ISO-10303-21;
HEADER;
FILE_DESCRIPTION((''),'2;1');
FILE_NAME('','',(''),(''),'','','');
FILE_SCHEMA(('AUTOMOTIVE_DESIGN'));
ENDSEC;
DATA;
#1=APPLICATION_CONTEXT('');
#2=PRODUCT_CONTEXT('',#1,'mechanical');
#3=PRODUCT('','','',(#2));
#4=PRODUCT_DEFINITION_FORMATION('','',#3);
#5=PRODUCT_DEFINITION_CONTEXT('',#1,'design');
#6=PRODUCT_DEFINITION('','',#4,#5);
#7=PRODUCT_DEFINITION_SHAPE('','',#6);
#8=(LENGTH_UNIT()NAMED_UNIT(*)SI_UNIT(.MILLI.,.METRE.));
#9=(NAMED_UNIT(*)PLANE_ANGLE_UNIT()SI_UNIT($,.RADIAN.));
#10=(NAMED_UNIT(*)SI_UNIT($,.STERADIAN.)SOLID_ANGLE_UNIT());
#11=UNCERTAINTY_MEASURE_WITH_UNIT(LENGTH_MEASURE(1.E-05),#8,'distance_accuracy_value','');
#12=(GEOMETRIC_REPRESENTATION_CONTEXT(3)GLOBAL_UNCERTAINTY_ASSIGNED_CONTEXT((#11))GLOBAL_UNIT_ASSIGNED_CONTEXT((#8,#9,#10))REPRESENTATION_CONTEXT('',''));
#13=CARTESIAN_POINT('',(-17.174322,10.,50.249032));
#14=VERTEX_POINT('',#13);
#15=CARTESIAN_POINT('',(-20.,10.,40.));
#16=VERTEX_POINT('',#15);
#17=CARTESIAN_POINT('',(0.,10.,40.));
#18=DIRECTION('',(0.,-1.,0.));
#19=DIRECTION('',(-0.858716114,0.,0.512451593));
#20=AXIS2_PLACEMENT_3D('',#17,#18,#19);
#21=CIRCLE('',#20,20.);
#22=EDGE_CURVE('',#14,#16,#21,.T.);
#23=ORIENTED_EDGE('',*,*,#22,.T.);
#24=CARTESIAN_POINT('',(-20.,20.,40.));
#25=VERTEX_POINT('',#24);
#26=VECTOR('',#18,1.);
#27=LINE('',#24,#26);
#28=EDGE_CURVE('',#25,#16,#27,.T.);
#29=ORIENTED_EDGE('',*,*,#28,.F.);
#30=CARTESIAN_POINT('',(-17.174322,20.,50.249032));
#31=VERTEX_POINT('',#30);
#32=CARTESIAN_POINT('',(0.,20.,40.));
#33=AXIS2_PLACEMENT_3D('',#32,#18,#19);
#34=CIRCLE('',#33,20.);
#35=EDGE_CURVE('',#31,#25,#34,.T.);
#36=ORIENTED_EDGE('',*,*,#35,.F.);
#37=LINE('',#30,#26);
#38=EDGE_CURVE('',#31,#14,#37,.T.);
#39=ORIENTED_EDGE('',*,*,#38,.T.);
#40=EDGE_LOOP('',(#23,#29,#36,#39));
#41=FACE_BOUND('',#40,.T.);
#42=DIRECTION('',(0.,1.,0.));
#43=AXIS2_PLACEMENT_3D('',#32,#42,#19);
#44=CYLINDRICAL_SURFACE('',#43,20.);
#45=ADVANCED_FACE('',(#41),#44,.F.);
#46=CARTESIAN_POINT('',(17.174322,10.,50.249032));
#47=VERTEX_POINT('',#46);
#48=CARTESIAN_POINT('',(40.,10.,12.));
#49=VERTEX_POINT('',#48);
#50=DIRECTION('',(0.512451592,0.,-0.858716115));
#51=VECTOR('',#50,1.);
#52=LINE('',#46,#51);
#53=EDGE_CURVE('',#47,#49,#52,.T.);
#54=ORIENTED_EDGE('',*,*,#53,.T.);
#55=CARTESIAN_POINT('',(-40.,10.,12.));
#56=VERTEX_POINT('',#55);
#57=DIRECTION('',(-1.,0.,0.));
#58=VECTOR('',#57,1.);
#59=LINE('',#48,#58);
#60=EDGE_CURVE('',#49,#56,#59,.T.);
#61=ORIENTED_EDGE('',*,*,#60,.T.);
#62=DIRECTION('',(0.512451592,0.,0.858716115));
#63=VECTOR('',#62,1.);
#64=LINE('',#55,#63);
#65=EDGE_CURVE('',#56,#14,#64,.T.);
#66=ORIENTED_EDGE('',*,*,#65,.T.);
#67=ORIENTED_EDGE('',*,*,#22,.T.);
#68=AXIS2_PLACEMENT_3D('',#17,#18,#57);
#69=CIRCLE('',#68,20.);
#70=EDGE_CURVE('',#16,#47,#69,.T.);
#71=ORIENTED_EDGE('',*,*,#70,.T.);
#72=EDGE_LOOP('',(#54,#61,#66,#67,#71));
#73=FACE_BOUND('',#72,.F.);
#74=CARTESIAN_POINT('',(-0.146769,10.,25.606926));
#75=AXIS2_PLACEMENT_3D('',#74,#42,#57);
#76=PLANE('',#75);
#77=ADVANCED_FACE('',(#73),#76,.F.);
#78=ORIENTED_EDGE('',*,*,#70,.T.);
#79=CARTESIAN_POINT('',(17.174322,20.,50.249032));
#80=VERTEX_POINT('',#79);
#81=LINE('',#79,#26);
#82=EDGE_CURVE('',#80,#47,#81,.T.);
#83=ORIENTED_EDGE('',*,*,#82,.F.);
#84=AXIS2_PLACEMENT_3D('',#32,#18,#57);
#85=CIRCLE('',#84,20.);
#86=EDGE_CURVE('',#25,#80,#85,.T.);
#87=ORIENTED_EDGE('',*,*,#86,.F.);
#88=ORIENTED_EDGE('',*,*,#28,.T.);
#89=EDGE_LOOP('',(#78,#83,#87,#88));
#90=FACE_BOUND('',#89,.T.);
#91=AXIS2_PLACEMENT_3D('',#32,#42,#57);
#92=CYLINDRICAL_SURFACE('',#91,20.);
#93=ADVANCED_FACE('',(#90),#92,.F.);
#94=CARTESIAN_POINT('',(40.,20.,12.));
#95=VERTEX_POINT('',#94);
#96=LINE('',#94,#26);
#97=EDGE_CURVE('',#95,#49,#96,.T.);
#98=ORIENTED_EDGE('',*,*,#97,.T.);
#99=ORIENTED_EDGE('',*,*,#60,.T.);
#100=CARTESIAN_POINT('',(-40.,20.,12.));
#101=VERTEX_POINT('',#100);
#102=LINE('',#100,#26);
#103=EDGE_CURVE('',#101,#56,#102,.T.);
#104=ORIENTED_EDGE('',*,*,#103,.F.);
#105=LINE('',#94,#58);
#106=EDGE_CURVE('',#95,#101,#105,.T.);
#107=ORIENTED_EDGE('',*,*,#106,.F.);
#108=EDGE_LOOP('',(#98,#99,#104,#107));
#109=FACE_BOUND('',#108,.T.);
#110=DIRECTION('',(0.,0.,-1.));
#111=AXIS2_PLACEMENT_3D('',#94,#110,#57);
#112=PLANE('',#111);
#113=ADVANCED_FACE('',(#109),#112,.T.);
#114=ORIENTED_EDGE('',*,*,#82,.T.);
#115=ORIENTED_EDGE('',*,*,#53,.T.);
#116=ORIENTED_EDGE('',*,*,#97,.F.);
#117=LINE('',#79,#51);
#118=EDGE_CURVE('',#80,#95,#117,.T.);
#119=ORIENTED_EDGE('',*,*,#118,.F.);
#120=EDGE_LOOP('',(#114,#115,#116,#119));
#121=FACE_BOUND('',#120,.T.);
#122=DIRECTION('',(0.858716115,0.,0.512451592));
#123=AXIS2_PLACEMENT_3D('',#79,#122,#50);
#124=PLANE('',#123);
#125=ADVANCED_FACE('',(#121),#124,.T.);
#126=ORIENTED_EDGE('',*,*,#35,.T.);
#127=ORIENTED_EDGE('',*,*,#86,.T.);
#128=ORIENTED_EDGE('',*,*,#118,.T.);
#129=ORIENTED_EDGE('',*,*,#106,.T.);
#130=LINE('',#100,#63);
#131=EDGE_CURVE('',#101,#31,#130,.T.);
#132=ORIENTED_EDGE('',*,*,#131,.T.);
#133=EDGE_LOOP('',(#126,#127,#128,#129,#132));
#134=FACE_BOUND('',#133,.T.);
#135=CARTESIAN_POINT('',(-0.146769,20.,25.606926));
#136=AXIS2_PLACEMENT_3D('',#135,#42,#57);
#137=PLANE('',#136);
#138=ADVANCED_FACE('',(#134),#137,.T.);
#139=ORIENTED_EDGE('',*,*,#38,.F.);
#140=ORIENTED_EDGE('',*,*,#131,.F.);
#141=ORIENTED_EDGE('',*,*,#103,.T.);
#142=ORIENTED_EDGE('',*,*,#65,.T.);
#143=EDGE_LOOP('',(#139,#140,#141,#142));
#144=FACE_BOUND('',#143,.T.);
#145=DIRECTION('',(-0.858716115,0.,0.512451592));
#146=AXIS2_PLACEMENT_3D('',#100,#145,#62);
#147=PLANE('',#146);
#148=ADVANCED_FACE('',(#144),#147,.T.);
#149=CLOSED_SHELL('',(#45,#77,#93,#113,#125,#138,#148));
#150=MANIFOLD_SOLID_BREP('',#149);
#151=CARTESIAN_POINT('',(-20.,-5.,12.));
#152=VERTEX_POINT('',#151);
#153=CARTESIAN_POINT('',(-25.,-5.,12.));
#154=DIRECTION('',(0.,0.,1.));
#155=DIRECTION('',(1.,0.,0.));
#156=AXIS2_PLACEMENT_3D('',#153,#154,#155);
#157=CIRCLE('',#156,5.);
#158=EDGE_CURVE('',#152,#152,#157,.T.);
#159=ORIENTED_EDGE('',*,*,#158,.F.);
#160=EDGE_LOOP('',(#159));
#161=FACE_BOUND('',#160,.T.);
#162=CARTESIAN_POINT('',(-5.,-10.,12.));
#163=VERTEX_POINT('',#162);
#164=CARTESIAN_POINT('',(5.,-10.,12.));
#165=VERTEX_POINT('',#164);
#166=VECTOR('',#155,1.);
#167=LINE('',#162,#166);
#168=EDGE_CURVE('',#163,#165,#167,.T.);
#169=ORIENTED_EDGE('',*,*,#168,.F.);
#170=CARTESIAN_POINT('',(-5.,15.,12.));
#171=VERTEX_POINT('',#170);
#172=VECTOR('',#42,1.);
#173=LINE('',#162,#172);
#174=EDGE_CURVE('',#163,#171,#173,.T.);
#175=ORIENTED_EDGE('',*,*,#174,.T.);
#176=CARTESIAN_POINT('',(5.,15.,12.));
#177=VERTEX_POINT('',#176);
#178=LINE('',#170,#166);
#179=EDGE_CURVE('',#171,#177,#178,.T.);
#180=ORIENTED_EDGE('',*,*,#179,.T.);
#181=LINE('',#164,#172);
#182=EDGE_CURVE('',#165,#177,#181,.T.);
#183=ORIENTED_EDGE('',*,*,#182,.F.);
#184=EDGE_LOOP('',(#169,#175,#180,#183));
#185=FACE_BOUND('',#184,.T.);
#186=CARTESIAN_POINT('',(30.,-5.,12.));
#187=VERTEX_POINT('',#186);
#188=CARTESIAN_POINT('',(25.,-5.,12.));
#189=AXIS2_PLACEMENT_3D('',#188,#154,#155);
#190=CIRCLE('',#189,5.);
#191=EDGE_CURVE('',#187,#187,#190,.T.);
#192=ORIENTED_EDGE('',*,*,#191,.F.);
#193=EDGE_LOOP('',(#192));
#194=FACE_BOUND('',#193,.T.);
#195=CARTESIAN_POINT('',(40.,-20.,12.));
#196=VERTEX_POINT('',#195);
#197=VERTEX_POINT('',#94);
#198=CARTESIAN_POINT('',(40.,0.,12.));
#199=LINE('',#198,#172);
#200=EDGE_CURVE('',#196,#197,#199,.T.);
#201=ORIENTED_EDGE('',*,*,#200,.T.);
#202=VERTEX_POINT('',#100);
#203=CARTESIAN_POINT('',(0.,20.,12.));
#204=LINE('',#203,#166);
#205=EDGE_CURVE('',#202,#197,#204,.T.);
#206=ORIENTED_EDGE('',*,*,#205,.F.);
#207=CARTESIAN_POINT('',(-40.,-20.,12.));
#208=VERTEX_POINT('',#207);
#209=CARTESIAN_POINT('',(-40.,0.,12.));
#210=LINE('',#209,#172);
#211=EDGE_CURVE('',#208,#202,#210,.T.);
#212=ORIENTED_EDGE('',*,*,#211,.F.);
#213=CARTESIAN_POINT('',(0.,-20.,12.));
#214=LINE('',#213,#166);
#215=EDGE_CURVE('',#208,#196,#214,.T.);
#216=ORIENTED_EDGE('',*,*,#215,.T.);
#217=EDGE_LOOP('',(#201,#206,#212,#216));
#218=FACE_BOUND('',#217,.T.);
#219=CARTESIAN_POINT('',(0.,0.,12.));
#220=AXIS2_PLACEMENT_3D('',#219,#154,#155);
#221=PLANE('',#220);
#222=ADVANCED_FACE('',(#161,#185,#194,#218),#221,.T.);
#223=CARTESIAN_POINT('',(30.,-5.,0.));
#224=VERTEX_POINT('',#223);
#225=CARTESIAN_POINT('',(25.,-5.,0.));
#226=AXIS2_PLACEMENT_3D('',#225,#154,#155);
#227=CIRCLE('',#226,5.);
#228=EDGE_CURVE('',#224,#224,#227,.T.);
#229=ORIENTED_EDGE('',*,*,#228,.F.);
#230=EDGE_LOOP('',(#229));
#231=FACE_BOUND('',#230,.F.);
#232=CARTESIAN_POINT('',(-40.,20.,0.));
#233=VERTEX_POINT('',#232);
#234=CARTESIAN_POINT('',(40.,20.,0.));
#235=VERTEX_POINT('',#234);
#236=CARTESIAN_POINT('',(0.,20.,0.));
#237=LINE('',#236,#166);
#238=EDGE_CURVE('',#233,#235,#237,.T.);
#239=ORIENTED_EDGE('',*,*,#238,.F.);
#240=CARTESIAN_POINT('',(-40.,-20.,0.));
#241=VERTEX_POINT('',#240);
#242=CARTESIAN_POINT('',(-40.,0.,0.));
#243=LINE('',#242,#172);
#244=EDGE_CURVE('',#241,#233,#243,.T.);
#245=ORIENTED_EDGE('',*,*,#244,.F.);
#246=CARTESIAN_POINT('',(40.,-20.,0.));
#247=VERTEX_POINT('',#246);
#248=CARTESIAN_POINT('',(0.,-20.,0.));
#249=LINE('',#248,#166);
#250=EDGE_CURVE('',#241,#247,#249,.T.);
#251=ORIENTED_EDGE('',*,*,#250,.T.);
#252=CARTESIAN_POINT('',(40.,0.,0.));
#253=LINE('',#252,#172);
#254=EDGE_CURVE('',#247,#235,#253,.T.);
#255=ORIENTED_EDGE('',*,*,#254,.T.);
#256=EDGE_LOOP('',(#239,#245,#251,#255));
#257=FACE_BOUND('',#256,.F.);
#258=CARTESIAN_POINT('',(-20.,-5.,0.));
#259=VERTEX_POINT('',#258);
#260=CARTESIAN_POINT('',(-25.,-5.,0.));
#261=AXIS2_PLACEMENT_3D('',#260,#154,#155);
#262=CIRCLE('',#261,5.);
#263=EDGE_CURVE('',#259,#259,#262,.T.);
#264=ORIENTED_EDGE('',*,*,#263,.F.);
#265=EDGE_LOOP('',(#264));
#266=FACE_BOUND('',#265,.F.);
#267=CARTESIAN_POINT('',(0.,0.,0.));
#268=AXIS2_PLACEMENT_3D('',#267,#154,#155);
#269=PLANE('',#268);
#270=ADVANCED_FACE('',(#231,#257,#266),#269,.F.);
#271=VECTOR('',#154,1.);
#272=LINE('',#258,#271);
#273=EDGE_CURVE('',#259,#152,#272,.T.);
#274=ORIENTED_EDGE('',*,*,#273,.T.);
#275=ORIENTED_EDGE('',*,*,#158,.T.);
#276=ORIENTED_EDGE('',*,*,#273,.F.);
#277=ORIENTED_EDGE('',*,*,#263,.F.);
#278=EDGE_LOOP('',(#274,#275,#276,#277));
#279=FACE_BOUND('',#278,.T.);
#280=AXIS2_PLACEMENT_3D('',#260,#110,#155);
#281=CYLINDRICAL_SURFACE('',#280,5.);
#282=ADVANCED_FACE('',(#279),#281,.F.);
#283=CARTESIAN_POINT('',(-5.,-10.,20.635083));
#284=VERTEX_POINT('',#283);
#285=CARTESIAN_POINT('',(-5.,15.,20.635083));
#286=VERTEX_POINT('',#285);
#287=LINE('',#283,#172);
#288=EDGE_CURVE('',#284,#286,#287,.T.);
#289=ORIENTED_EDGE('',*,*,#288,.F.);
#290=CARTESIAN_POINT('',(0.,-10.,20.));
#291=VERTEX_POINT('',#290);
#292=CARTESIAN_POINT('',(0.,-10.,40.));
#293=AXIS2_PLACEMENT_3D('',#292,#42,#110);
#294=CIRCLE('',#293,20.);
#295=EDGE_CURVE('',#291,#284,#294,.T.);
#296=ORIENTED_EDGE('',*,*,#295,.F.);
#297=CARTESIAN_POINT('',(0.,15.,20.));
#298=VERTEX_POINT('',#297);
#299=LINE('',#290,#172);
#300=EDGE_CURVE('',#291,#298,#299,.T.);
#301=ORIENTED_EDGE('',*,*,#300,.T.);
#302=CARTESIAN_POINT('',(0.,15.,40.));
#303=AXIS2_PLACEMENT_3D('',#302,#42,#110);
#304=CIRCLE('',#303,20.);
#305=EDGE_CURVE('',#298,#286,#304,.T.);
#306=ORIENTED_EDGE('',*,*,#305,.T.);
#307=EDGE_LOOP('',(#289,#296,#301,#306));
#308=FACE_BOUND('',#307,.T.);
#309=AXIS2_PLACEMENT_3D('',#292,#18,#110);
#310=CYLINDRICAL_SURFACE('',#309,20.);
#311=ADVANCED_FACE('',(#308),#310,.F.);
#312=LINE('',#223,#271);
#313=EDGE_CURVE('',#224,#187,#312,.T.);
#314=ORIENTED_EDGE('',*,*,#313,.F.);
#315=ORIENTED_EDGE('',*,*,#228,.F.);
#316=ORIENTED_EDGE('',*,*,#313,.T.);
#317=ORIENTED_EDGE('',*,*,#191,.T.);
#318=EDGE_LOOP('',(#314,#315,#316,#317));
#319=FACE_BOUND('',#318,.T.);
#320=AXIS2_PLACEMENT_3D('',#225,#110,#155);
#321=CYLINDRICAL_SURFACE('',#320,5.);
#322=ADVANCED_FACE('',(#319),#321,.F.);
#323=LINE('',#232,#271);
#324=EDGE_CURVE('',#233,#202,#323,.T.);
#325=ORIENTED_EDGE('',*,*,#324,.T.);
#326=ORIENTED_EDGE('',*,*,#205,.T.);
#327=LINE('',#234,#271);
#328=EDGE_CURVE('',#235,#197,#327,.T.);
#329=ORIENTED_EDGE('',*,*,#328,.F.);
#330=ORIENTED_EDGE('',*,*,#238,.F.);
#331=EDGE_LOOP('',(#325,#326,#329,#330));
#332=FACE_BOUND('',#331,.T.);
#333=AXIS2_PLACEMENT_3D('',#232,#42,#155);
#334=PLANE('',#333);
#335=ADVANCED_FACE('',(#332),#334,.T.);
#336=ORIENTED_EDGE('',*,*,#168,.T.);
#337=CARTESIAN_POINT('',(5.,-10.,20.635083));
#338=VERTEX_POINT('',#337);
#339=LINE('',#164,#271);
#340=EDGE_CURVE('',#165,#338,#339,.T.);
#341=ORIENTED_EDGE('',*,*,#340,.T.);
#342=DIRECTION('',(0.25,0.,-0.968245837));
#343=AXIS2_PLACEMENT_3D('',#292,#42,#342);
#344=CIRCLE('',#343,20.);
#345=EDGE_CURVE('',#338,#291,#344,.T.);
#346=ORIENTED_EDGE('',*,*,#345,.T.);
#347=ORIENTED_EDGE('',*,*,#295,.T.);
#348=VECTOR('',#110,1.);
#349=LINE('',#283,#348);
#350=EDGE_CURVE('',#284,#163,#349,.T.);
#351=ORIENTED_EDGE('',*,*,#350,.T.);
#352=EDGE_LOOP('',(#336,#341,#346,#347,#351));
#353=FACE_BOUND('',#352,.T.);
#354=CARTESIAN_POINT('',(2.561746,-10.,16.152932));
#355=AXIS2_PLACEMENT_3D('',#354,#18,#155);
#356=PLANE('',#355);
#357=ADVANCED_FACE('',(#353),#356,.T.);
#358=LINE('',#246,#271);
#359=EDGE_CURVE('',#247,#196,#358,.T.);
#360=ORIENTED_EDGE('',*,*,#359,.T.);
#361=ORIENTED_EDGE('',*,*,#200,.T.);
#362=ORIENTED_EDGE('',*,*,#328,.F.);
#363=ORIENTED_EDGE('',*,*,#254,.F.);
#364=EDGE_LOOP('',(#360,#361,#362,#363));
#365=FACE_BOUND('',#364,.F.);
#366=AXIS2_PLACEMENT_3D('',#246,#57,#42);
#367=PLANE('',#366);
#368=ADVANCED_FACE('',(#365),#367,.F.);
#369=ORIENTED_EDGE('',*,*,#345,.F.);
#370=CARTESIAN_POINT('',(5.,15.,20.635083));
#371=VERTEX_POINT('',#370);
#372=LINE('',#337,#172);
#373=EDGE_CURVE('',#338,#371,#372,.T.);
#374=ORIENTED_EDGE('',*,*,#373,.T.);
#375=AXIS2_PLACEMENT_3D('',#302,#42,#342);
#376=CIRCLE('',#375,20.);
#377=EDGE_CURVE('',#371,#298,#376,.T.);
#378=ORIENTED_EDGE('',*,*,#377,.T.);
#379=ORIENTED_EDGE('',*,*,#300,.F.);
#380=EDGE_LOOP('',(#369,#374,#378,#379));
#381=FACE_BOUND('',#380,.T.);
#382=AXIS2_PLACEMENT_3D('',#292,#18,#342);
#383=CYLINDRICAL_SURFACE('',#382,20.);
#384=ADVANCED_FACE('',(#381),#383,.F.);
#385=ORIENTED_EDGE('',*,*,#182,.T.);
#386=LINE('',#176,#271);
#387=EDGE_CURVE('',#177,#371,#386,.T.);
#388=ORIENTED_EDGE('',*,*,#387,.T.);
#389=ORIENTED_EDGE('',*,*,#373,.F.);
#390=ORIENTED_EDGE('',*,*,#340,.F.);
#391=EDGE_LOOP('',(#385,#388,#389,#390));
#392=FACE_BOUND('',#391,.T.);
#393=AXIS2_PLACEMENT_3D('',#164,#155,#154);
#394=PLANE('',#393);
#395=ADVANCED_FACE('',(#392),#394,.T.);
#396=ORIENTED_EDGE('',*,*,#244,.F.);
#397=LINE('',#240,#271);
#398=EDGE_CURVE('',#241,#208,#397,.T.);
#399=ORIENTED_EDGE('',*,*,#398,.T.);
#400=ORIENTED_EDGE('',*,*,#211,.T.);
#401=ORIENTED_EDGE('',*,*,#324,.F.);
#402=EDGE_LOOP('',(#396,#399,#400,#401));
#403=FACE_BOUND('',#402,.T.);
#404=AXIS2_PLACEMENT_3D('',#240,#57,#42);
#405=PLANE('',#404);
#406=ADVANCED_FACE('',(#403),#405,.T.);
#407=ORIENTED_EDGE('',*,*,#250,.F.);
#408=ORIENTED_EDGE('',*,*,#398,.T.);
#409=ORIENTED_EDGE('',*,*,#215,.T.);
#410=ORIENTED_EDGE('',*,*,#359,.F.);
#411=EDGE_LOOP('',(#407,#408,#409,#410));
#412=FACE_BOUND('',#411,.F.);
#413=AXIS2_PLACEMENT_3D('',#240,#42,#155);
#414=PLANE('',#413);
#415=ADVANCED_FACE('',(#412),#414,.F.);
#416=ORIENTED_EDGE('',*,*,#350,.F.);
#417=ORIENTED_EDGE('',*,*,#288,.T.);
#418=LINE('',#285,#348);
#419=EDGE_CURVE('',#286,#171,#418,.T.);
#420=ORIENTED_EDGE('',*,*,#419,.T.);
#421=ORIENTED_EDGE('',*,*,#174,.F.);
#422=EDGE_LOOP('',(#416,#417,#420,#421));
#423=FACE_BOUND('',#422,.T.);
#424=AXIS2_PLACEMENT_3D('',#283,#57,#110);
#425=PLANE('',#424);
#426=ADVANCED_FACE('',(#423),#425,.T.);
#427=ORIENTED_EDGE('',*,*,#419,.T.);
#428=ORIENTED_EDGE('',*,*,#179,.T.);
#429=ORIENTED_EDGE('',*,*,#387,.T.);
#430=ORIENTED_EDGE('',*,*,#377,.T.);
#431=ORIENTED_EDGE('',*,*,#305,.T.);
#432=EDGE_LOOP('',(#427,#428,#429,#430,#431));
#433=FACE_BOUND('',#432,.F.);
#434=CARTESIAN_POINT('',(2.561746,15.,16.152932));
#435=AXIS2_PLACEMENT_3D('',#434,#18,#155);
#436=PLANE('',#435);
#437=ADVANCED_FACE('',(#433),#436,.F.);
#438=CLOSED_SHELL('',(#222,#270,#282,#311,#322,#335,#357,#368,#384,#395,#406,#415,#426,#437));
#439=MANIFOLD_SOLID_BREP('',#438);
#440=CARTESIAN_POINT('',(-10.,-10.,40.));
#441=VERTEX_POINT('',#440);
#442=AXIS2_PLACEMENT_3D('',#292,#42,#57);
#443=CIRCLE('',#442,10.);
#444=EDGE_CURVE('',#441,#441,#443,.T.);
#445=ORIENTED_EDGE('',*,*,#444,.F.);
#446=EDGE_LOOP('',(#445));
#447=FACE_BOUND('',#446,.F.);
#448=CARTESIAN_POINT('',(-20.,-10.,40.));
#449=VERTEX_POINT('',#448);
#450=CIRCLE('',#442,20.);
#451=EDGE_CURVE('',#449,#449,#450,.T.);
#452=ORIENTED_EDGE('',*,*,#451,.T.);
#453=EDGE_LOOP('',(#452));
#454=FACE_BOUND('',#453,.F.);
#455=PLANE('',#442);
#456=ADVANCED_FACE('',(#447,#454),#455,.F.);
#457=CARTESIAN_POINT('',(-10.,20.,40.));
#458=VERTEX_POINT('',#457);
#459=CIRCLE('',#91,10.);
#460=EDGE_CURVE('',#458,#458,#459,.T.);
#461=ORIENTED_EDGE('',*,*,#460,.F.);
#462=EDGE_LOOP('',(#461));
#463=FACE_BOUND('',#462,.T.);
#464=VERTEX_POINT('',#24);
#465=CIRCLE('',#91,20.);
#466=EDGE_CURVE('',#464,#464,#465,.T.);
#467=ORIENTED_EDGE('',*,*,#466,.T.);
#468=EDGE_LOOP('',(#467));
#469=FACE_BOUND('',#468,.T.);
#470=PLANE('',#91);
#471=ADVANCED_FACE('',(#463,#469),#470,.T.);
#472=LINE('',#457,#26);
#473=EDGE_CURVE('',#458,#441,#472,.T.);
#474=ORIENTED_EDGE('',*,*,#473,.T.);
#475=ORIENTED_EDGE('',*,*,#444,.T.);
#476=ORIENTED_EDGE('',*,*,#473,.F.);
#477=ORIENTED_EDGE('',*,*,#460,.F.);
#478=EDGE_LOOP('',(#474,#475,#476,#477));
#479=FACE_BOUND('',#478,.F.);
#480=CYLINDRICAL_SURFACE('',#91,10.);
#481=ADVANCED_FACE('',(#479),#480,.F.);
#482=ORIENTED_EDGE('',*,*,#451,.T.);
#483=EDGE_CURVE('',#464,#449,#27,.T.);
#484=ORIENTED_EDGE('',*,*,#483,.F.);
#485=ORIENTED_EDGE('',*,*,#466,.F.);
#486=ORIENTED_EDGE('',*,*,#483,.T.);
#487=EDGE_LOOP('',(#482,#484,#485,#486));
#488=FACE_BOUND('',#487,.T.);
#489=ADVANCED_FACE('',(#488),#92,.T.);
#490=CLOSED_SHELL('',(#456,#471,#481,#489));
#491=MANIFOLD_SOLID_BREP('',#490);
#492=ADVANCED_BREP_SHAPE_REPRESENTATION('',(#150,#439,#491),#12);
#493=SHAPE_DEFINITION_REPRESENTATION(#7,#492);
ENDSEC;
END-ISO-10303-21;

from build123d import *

# Parameters (mm, degrees)
F0_W     = 80
F0_H     = 40
F0_R     = 5
F1_DEPTH = 12
F2_R     = 20
F2_R_2   = 10
F3_DEPTH = 30
F5_DEPTH = 10
F7_DEPTH = 25


with BuildPart() as f1:
    # F0 (on Top) → F1 (new body)
    with BuildSketch(Plane.XY):
        Rectangle(F0_W, F0_H)
        with Locations((-25, -5)):
            Circle(F0_R, mode=Mode.SUBTRACT)
        with Locations((25, -5)):
            Circle(F0_R, mode=Mode.SUBTRACT)
    extrude(amount=F1_DEPTH)

    # F6 (on face) → F7 (join)
    with BuildSketch(Plane.XZ.offset(10)):
        with BuildLine():
            Line((0, 12), (5, 12))
            Line((5, 12), (5, 20.635083269))
            ThreePointArc((5, 20.635083269), (2.5200858497, 20.1594060747), (0, 20))
            Line((0, 20), (0, 12))
        make_face()
        with BuildLine():
            Line((-5, 20.635083269), (-5, 12))
            Line((-5, 12), (0, 12))
            Line((0, 12), (0, 20))
            ThreePointArc((0, 20), (-2.5200858497, 20.1594060747), (-5, 20.635083269))
        make_face()
    extrude(amount=-F7_DEPTH)


with BuildPart() as f3:
    # F2 (on face) → F3 (new body)
    with BuildSketch(Plane(origin=(0, 20, 0), x_dir=(-1, 0, 0), z_dir=(0, 1, 0))):
        with Locations((0, 40)):
            Circle(F2_R)
        with Locations((0, 40)):
            Circle(F2_R_2, mode=Mode.SUBTRACT)
    extrude(amount=-F3_DEPTH)


with BuildPart() as f5:
    # F4 (on face) → F5 (new body)
    with BuildSketch(Plane(origin=(0, 20, 0), x_dir=(-1, 0, 0), z_dir=(0, 1, 0))):
        with BuildLine():
            Line((-17.1743221847, 50.2490320273), (-40, 12))
            Line((-40, 12), (40, 12))
            Line((40, 12), (17.1743222859, 50.2490318576))
            ThreePointArc((17.1743222859, 50.2490318576), (19.2806437356, 45.3157104079), (20, 40))
            ThreePointArc((20, 40), (-5.3157105031, 20.7193562906), (-17.1743221847, 50.2490320273))
        make_face()
    extrude(amount=-F5_DEPTH)


solid = Compound([f1.part, f3.part, f5.part])
